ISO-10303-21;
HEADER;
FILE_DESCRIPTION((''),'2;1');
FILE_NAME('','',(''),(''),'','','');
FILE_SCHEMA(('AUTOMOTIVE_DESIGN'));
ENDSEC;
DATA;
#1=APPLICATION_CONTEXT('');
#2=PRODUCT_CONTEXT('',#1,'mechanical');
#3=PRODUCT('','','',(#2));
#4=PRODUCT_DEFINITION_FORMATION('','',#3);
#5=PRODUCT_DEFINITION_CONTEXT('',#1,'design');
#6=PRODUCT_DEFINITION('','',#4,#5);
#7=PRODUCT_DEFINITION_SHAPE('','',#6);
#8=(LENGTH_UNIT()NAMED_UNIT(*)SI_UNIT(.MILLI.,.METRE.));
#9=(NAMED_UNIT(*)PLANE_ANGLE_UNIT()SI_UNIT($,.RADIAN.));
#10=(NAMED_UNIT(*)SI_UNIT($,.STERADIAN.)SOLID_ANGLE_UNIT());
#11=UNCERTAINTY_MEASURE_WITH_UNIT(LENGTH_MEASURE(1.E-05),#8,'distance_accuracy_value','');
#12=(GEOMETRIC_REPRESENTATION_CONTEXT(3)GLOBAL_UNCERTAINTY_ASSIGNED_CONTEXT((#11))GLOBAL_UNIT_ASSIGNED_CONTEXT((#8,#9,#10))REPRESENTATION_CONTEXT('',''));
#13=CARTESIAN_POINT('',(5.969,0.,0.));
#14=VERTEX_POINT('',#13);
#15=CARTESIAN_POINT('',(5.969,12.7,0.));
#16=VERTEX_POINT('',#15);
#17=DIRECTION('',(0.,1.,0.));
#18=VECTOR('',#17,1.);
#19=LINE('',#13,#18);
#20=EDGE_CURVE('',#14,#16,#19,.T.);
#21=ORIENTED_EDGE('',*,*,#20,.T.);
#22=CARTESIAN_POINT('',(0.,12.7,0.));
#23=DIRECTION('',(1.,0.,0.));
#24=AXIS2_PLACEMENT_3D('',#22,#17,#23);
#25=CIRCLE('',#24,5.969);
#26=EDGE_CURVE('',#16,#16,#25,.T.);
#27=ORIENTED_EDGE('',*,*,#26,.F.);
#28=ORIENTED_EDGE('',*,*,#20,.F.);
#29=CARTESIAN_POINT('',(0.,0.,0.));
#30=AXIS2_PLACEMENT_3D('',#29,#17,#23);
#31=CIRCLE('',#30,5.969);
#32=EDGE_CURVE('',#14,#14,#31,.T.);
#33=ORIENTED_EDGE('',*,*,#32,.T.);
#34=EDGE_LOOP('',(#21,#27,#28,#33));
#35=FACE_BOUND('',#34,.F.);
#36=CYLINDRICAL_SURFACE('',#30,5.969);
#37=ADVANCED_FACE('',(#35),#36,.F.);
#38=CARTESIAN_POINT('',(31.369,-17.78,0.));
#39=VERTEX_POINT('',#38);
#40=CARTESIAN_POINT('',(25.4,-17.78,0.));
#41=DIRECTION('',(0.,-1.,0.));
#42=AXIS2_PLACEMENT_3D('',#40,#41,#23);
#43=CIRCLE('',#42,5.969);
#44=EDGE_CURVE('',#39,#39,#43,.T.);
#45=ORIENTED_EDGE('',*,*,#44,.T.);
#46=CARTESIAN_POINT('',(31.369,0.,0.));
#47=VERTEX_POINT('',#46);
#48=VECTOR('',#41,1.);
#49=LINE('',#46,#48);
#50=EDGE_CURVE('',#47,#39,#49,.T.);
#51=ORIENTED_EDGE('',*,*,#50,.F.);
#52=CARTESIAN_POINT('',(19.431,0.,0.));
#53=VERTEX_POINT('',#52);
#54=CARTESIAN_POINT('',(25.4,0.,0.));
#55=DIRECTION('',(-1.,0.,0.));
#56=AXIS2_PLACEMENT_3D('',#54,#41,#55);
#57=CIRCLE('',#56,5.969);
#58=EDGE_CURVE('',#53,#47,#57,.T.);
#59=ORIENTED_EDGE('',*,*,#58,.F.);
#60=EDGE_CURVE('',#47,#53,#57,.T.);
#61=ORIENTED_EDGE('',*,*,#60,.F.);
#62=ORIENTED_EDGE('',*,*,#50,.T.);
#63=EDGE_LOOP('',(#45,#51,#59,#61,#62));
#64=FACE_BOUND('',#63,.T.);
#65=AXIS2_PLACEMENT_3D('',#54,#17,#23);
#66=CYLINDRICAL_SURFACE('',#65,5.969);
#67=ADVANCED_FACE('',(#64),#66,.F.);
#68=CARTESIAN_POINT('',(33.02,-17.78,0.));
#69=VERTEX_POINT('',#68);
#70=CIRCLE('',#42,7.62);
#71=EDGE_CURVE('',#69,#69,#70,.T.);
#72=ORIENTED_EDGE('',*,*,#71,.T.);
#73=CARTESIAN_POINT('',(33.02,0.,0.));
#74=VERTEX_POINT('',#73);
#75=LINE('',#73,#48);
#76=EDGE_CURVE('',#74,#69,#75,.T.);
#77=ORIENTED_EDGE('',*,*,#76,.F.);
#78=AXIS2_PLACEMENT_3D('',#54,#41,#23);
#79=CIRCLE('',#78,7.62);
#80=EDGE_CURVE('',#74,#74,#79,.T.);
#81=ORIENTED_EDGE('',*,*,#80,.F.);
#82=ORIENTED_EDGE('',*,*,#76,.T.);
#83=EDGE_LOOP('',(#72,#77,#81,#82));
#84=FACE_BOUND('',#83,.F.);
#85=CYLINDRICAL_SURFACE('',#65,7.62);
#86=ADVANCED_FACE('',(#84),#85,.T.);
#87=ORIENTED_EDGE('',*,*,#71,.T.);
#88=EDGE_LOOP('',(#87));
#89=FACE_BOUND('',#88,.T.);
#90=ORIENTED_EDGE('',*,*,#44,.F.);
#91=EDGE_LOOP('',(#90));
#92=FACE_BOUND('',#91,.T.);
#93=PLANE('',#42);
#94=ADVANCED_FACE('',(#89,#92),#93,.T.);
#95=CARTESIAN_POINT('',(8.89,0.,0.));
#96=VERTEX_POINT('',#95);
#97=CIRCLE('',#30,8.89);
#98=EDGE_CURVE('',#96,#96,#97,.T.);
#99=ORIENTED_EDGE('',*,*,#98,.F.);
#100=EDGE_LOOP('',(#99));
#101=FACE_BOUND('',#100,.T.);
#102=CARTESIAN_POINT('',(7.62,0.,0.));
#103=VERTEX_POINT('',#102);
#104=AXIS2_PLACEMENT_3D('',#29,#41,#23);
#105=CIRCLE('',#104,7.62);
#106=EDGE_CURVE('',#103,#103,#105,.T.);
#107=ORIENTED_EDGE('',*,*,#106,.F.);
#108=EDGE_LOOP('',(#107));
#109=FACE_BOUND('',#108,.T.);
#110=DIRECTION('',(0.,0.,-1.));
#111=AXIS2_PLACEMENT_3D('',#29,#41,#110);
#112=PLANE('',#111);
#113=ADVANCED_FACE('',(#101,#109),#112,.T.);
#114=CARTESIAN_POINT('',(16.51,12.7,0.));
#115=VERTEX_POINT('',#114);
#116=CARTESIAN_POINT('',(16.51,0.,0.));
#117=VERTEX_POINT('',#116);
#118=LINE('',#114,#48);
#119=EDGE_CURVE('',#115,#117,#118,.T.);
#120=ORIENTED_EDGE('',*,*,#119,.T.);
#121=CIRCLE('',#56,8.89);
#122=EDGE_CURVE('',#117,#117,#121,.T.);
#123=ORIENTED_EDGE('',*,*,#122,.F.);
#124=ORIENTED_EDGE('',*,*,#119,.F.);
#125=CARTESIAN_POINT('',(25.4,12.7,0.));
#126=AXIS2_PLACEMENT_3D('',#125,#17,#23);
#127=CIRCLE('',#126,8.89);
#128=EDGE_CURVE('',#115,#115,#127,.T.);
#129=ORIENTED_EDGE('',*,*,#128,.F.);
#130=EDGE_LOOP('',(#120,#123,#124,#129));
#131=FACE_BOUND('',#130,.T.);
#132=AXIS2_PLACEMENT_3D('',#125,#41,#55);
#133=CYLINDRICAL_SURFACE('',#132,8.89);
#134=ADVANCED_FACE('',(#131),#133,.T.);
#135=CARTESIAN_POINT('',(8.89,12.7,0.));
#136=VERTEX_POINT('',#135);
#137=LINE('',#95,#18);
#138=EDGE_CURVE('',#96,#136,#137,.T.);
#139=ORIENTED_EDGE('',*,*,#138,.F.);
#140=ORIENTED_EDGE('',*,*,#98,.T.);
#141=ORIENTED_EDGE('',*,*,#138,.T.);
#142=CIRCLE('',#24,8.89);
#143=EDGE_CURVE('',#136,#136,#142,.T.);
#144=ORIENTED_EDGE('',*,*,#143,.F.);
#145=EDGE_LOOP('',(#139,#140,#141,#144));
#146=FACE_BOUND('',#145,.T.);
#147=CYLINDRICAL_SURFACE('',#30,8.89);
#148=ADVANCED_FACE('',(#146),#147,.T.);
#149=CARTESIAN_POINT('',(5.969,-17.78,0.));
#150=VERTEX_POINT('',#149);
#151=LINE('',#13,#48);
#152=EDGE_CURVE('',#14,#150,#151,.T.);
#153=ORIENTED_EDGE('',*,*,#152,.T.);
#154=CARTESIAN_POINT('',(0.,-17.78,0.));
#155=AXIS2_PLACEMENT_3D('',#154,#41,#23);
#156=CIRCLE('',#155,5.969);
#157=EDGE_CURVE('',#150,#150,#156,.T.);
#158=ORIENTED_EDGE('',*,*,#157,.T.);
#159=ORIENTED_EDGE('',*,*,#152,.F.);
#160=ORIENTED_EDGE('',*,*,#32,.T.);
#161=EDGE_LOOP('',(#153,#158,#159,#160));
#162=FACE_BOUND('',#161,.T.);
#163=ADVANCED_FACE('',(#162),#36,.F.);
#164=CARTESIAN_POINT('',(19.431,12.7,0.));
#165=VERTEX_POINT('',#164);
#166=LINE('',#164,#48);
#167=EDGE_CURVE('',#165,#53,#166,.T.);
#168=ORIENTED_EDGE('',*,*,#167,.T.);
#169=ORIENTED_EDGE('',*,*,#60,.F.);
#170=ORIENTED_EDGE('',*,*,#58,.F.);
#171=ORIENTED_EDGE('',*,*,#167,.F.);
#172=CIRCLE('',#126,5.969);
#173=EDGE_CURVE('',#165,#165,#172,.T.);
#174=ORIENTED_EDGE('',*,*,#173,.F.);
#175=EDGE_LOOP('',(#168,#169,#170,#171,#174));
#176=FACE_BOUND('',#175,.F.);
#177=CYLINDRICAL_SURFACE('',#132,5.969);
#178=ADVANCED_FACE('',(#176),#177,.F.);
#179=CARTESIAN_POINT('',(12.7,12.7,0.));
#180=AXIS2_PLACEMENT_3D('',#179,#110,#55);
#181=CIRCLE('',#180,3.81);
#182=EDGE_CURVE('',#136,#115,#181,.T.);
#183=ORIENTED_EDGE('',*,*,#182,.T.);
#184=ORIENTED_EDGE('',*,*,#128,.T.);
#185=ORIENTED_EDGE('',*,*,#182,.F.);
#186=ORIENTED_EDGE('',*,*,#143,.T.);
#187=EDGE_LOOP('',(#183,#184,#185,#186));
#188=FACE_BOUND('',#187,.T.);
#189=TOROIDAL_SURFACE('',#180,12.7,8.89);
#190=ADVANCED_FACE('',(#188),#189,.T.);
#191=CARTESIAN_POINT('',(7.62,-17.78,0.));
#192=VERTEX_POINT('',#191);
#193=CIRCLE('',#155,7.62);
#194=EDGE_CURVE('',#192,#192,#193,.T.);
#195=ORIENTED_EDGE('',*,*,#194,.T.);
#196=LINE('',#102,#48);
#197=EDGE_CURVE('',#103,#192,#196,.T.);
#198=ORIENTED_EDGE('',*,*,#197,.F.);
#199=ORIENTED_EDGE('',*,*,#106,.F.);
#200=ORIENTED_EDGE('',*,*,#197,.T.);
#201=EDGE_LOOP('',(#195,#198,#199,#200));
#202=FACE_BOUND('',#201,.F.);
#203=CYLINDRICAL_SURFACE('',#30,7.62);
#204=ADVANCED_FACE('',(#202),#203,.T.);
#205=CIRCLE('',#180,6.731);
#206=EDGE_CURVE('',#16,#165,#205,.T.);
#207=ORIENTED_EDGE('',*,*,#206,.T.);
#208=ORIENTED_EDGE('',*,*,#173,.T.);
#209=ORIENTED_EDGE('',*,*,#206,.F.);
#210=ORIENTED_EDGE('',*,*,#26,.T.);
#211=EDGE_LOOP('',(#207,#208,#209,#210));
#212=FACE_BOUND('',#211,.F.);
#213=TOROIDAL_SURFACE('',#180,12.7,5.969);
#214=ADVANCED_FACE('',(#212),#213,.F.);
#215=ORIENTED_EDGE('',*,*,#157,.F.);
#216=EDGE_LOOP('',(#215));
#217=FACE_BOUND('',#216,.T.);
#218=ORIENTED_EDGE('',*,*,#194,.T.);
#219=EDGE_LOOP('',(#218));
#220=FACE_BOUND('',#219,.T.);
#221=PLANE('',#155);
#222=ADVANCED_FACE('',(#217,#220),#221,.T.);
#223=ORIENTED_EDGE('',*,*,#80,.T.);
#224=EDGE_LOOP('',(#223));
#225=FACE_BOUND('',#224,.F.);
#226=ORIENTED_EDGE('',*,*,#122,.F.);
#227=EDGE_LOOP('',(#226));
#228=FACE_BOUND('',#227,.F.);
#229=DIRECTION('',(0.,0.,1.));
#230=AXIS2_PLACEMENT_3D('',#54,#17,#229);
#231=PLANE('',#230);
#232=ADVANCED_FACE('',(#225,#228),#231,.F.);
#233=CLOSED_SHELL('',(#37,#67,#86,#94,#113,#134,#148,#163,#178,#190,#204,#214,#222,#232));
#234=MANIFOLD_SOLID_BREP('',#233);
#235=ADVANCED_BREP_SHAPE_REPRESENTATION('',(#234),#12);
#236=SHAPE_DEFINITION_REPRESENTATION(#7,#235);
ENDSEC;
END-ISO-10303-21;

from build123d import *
from build123d import SkipClean  # not in build123d's __all__

# Parameters (mm, degrees)
F0_R     = 8.89
F0_R_2   = 5.969
F3_R     = 7.62
F3_R_2   = 5.969
F4_R     = 7.62
F4_R_2   = 5.969
F5_DEPTH = 17.78


with BuildPart() as f2:
    # F2: sweep along a path in F1
    with BuildLine(Plane.XY) as f2_path:
        Line((0, 0), (0, 12.7))
        ThreePointArc((0, 12.7), (12.7, 25.4), (25.4, 12.7))
        Line((25.4, 12.7), (25.4, 0))
    # F0 (on Front) → F2 (sweep)
    with BuildSketch(Plane.XZ):
        Circle(F0_R)
        Circle(F0_R_2, mode=Mode.SUBTRACT)
    sweep(path=f2_path.line)

    # F3 (on face) + F4 (on face) → F5 (join)
    with BuildSketch(Plane.XZ):
        Circle(F3_R)
        Circle(F3_R_2, mode=Mode.SUBTRACT)
    with BuildSketch(Plane.XZ):
        with Locations((25.4, 0)):
            Circle(F4_R)
        with Locations((25.4, 0)):
            Circle(F4_R_2, mode=Mode.SUBTRACT)
    with SkipClean():  # cleaning this boolean's faces spoils the solid; the shape is the same uncleaned
        extrude(amount=F5_DEPTH)


solid = f2.part
